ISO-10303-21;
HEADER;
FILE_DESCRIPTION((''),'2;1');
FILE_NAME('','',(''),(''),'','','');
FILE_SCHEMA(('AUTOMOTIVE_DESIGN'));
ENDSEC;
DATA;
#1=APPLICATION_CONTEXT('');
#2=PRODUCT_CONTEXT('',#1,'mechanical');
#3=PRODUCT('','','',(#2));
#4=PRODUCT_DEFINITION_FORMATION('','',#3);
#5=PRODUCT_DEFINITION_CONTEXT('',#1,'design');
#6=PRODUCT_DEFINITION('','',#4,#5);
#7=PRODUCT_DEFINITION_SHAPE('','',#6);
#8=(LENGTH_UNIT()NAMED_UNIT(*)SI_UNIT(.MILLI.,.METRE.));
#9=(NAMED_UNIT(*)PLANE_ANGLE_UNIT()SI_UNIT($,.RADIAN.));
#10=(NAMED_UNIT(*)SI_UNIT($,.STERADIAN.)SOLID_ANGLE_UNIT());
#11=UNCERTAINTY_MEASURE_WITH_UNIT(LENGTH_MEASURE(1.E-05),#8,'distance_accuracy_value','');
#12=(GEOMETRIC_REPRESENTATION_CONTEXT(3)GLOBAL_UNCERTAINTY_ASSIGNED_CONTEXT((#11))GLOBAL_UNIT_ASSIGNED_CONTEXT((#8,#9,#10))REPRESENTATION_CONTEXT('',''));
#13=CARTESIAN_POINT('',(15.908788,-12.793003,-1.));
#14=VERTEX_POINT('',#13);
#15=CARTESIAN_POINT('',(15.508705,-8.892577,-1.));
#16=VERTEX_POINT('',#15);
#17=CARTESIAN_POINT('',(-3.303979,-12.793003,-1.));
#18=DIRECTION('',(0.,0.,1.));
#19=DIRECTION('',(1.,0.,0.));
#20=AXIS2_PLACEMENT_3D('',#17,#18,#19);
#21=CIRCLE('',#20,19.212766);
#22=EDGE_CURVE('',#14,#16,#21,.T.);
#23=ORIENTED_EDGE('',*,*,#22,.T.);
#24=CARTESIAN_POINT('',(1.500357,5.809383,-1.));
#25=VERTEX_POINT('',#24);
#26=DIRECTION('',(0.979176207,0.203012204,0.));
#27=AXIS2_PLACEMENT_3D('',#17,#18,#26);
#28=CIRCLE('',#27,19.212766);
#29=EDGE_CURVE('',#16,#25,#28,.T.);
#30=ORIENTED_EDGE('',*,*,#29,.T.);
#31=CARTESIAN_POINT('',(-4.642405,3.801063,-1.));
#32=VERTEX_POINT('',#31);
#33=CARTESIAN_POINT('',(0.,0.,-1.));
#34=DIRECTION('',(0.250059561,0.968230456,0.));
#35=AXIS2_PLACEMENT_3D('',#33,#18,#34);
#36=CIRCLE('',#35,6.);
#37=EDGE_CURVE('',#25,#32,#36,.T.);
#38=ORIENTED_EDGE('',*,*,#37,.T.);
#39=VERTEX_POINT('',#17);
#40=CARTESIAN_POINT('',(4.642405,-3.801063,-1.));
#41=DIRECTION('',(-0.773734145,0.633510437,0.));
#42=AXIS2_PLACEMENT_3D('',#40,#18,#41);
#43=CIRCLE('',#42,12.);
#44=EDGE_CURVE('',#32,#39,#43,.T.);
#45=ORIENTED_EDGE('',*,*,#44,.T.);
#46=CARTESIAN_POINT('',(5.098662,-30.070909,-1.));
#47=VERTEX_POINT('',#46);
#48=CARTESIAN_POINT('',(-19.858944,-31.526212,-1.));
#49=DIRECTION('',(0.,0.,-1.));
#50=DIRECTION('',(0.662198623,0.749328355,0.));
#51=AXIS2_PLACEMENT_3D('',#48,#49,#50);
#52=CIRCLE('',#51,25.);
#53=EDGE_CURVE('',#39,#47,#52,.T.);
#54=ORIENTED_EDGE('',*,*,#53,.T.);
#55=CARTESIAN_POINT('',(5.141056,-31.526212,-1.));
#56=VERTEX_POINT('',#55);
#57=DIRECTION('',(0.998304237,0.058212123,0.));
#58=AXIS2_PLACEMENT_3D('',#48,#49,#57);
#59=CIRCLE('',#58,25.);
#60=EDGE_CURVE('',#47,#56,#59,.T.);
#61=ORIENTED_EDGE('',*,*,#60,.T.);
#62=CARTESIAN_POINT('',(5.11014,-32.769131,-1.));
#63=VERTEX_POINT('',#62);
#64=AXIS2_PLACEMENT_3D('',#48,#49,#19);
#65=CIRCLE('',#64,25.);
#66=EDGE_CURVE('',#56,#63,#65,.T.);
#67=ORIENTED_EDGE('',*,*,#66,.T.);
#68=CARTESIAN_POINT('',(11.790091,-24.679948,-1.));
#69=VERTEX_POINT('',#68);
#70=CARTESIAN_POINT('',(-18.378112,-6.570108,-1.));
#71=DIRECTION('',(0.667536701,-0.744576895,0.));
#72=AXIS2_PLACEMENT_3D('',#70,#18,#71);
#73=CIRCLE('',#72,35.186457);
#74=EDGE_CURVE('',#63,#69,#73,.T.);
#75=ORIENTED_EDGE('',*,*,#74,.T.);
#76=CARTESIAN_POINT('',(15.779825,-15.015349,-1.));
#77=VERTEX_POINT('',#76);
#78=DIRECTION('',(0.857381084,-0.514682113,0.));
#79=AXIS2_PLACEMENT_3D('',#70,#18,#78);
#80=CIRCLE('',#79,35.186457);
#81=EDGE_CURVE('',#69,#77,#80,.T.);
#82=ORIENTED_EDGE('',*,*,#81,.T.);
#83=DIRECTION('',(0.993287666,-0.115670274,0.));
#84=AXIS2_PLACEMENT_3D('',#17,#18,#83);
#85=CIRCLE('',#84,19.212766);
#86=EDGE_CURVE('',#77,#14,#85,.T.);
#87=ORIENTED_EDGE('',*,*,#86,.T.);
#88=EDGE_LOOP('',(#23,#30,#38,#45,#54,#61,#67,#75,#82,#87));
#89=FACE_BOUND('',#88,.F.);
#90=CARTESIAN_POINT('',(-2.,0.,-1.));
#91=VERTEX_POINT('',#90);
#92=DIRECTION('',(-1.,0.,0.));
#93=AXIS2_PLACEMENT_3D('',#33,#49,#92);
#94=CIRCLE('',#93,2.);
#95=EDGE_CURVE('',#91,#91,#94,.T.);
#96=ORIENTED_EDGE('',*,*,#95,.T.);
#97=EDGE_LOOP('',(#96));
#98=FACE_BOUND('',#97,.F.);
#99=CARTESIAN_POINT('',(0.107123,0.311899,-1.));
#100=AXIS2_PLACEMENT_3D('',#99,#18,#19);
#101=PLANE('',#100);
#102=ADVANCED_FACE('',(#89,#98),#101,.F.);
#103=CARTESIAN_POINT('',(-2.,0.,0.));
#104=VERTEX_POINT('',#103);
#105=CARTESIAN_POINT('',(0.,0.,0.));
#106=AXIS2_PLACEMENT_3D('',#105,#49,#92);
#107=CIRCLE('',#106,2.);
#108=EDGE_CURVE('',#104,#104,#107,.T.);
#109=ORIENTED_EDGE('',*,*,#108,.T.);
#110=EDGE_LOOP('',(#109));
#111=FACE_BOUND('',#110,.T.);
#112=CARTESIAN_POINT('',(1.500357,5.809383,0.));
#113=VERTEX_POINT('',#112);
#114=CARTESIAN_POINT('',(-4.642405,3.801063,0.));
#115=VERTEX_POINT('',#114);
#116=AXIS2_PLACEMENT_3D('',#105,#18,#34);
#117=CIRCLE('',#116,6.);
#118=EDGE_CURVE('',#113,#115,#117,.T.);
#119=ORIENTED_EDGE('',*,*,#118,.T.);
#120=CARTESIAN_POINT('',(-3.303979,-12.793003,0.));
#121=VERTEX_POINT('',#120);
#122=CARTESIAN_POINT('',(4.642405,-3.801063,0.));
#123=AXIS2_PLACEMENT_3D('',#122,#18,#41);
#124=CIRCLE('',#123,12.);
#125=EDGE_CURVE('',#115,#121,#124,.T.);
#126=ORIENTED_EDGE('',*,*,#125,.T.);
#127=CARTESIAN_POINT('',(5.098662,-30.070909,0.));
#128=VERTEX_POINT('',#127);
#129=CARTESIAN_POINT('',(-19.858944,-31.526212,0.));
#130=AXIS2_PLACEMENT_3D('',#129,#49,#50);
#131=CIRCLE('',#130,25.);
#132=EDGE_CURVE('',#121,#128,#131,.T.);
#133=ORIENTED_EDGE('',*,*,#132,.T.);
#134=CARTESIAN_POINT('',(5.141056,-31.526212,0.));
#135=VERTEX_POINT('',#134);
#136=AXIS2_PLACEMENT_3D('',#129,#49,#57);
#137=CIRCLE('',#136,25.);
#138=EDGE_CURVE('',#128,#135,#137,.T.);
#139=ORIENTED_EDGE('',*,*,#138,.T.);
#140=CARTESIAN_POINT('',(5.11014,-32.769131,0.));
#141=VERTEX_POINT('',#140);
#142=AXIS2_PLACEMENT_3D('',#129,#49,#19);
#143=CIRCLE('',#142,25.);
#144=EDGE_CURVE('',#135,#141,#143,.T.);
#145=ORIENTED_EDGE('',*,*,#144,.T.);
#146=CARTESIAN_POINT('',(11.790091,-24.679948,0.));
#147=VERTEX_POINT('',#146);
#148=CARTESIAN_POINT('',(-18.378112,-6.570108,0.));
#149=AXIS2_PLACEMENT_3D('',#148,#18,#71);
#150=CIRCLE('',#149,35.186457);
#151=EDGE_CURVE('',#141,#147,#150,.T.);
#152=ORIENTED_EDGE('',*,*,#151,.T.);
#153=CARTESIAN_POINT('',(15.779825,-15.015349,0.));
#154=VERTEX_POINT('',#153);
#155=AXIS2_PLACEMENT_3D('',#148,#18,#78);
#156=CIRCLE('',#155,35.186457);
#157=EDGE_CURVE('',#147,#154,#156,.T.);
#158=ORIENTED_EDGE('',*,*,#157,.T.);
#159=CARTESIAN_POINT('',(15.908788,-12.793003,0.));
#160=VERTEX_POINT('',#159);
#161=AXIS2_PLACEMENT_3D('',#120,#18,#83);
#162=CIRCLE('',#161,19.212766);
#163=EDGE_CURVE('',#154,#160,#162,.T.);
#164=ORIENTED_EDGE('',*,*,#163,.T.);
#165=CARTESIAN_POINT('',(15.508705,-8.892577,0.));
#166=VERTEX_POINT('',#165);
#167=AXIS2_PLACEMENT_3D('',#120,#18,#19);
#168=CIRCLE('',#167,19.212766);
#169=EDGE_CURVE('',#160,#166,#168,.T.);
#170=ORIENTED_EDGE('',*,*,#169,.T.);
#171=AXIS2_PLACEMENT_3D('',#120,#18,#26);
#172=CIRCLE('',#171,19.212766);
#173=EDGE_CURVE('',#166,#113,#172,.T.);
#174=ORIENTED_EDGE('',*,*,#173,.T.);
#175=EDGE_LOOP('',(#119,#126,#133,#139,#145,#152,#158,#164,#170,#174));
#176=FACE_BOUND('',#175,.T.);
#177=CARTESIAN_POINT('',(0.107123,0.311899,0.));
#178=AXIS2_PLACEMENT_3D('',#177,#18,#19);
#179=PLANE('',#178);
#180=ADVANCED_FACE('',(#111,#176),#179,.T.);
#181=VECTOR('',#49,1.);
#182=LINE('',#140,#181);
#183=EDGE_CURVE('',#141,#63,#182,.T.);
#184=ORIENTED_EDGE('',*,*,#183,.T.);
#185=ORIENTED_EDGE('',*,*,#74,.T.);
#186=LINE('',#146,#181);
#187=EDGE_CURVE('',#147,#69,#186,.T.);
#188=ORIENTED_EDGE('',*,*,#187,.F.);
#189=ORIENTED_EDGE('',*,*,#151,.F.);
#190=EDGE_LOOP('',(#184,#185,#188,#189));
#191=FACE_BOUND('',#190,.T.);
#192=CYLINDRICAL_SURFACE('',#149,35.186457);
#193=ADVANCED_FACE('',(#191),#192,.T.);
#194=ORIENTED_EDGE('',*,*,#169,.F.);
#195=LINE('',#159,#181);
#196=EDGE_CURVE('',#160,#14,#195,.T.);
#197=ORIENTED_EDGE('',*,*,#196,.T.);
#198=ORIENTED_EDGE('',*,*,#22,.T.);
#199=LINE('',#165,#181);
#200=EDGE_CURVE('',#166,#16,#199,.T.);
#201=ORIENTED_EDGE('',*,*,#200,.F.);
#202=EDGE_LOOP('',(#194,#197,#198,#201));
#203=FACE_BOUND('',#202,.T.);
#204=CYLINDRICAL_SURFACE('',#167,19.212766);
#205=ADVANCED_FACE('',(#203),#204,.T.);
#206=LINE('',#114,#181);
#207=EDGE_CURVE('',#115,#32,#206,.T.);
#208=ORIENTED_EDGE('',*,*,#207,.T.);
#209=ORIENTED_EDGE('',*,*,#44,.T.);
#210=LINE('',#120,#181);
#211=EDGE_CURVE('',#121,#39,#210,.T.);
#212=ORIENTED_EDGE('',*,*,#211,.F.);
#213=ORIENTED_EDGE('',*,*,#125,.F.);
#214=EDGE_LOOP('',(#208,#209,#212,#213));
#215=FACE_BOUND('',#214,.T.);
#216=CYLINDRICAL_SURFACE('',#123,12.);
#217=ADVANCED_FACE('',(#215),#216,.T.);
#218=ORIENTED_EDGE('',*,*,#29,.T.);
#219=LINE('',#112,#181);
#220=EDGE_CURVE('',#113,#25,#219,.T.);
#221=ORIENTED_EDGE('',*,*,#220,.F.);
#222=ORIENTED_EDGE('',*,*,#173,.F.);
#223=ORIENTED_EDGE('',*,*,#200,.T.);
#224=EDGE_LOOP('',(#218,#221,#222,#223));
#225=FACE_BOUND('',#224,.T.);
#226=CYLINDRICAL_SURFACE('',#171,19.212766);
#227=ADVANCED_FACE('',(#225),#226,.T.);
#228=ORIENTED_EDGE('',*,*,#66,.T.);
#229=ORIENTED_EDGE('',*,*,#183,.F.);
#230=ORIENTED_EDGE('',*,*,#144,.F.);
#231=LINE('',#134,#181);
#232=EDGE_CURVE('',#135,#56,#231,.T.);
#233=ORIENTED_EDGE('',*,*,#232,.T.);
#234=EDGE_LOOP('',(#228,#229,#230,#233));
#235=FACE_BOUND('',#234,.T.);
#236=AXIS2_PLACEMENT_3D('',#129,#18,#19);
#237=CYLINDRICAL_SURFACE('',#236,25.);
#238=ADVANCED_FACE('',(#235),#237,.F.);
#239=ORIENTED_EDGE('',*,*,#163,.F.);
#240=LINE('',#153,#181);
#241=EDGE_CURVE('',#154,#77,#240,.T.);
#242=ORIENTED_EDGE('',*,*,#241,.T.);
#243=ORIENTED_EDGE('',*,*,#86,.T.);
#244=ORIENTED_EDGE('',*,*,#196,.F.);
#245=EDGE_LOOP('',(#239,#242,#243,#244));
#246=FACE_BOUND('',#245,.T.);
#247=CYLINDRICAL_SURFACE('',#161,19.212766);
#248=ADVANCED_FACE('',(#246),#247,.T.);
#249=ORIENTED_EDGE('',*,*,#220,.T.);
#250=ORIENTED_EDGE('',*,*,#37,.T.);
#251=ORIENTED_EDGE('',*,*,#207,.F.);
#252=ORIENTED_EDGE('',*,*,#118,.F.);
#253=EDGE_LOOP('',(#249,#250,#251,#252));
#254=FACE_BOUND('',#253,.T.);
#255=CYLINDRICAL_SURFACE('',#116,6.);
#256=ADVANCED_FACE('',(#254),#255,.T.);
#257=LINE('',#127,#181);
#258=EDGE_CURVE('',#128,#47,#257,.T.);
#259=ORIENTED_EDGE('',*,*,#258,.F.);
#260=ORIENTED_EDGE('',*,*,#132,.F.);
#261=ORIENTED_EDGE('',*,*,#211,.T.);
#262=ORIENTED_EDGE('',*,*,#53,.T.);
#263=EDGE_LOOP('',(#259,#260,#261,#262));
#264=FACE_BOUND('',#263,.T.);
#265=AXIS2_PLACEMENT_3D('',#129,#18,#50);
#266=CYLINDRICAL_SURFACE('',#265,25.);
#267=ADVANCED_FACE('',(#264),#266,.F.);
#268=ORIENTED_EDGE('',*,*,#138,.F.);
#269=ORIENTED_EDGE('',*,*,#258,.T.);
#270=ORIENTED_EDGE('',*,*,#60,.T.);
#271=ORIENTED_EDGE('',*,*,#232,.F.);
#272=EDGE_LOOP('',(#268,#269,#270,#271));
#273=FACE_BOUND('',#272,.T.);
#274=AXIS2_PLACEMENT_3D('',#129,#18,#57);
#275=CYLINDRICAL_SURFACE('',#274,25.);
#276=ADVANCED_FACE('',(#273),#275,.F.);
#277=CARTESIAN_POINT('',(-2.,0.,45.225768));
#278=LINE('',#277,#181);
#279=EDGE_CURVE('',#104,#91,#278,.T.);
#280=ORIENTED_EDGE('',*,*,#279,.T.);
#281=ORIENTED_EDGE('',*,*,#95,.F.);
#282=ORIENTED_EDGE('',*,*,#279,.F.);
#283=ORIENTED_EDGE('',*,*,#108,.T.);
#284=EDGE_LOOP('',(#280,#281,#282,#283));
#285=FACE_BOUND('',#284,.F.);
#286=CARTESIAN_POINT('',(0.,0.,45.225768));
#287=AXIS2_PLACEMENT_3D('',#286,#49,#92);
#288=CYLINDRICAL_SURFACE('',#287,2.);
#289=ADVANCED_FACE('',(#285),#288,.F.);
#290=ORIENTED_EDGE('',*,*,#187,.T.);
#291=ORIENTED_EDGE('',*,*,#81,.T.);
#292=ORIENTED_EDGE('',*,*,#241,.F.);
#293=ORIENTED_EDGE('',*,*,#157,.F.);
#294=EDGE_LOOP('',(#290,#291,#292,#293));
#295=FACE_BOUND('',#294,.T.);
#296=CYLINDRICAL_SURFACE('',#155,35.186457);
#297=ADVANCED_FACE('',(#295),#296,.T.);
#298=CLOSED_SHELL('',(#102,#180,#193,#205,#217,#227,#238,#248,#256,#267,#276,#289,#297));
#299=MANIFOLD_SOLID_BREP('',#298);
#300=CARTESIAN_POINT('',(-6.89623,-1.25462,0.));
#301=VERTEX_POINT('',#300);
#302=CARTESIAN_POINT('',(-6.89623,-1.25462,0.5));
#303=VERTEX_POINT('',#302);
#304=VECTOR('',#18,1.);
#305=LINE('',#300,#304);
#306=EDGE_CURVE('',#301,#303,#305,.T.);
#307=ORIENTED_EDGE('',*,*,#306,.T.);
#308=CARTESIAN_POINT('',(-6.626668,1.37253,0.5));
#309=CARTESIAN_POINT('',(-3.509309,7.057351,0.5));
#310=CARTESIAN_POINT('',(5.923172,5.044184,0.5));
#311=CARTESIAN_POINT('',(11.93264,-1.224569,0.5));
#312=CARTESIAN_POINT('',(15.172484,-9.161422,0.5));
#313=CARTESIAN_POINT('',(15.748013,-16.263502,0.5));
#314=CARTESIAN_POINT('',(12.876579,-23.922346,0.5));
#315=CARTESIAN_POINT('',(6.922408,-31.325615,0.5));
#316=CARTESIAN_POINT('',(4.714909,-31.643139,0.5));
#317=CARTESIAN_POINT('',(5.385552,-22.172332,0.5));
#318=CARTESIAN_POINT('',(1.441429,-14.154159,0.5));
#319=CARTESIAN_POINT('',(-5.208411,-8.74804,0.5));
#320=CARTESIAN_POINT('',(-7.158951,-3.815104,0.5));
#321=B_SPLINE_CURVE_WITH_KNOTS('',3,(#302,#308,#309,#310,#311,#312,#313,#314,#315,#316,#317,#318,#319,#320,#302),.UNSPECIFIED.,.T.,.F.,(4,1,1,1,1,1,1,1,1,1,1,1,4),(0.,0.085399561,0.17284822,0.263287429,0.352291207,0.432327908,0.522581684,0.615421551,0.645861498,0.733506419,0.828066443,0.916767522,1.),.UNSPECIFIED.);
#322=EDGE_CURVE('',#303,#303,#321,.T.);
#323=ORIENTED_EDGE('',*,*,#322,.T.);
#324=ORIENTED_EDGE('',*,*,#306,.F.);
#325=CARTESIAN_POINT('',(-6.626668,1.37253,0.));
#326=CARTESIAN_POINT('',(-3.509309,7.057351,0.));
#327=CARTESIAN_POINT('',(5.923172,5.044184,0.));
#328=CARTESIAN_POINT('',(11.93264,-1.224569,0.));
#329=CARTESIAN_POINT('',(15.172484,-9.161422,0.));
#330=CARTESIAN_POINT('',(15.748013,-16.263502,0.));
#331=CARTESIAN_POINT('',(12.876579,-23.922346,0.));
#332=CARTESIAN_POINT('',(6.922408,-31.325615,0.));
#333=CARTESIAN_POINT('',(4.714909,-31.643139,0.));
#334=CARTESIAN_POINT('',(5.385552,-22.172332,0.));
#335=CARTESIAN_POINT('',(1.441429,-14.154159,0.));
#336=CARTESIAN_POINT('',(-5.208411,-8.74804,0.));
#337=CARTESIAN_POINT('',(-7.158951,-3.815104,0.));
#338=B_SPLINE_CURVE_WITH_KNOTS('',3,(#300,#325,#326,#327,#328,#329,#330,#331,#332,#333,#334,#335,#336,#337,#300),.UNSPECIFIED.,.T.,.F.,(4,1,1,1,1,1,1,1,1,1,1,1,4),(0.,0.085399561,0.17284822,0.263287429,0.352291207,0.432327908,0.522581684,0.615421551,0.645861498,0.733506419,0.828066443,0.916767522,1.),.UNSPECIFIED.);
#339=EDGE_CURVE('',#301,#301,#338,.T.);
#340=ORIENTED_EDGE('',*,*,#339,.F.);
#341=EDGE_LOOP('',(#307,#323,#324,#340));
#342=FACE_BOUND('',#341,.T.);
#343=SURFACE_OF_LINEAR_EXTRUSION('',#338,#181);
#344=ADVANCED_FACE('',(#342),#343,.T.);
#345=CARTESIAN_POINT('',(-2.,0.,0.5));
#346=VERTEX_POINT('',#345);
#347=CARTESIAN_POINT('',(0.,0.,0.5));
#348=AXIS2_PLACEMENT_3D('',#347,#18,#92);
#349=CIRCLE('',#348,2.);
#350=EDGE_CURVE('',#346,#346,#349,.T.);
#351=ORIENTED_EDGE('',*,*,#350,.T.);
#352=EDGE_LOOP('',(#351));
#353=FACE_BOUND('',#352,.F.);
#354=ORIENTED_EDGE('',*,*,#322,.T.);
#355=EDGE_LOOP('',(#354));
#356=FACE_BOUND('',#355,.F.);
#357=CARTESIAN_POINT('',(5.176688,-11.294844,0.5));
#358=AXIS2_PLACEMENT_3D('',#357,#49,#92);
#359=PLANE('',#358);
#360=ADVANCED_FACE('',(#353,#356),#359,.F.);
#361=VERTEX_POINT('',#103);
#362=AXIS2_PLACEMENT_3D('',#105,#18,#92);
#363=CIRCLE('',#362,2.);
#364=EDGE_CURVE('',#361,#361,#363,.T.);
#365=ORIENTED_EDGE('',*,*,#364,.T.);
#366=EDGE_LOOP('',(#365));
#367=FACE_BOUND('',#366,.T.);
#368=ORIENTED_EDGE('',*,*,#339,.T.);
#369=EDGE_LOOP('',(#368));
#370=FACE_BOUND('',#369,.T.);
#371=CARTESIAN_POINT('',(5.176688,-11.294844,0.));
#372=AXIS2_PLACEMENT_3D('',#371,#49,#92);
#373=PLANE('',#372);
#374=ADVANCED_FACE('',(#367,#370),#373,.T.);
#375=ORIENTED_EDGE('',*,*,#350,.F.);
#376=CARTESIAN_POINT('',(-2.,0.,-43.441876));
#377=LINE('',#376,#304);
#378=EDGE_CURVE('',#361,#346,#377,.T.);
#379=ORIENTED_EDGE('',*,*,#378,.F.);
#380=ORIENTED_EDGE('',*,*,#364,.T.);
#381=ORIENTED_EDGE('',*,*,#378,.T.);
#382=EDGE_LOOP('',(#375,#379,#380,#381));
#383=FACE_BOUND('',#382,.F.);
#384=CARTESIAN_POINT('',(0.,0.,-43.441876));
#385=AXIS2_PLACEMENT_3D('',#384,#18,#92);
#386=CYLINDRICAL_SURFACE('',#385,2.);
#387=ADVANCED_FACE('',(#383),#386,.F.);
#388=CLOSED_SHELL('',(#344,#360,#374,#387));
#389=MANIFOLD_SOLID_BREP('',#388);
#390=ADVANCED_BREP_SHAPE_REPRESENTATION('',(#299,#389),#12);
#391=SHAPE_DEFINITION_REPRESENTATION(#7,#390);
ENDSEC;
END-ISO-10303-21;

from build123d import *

# Parameters (mm, degrees)
F1_DEPTH = 1
F2_D     = 4
F4_DEPTH = 0.5
F5_D     = 4


# Not quite as in the source:
# - a feature names something its author has since deleted; it is built from what else it names


with BuildPart() as f1:
    # F0 (on Top) → F1 (new body)
    with BuildSketch(Plane.XY):
        with BuildLine():
            ThreePointArc((-4.6424048681, 3.80106262), (-2.0181143168, -5.6504172062), (6, 0))
            ThreePointArc((6, 0), (4.7435294982, 3.6740887169), (1.5003573667, 5.8093827359))
            ThreePointArc((1.5003573667, 5.8093827359), (-1.8645248851, 5.7029419559), (-4.6424048681, 3.80106262))
        make_face()
        with BuildLine():
            ThreePointArc((1.5003573667, 5.8093827359), (4.7435294982, 3.6740887169), (6, 0))
            ThreePointArc((6, 0), (-2.0181143168, -5.6504172062), (-4.6424048681, 3.80106262))
            ThreePointArc((-4.6424048681, 3.80106262), (-7.318751316, -4.7658127053), (-3.303978556, -12.7930029256))
            ThreePointArc((-3.303978556, -12.7930029256), (7.078551337, -15.5511771033), (15.5087052047, -8.8925768346))
            ThreePointArc((15.5087052047, -8.8925768346), (10.6056515013, 0.4603961331), (1.5003573667, 5.8093827359))
        make_face()
        with BuildLine():
            ThreePointArc((15.9087878687, -12.7930028931), (15.8085054873, -10.83255718), (15.5087052047, -8.8925768346))
            ThreePointArc((15.5087052047, -8.8925768346), (7.078551337, -15.5511771033), (-3.303978556, -12.7930029256))
            ThreePointArc((-3.303978556, -12.7930029256), (2.6233801475, -20.5925438503), (5.0986617771, -30.0709087245))
            ThreePointArc((5.0986617771, -30.0709087245), (8.7496291756, -27.7543175035), (11.7900910284, -24.6799477224))
            ThreePointArc((11.7900910284, -24.6799477224), (14.1459437512, -19.9966701457), (15.7798253656, -15.015348857))
            ThreePointArc((15.7798253656, -15.015348857), (15.8765201462, -13.9060452228), (15.9087878687, -12.7930028931))
        make_face()
        with BuildLine():
            ThreePointArc((11.7900910284, -24.6799477224), (8.7496291756, -27.7543175035), (5.0986617771, -30.0709087245))
            ThreePointArc((5.0986617771, -30.0709087245), (5.130455094, -30.7982515831), (5.1410558629, -31.5262117967))
            ThreePointArc((5.1410558629, -31.5262117967), (5.1333256528, -32.1478634275), (5.1101398029, -32.7691306185))
            ThreePointArc((5.1101398029, -32.7691306185), (8.7532813741, -28.9748900207), (11.7900910284, -24.6799477224))
        make_face()
    extrude(amount=-F1_DEPTH)

    # F2 (through all)
    with Locations(Plane.XY):
        with Locations((0, 0)):
            Hole(F2_D / 2)


with BuildPart() as f4:
    # F3 (on Top) → F4 (new body)
    with BuildSketch(Plane.XY):
        with BuildLine():
            add(Edge.make_bspline(
                [(-6.8962299265, -1.2546199141), (-6.626668451, 1.3725303486), (-3.5093090382, 7.0573512811), (5.9231715051, 5.0441838522), (11.9326397328, -1.2245690506), (15.1724840247, -9.1614223638), (15.7480132614, -16.2635016888), (12.8765786983, -23.9223462621), (6.9224077381, -31.3256150747), (4.7149088903, -31.6431390236), (5.3855520707, -22.1723322109), (1.4414285593, -14.15415947), (-5.2084107106, -8.7480398369), (-7.1589510611, -3.8151041102), (-6.8962299265, -1.2546199141)],
                knots=[0, 0, 0, 0, 0.0853995614, 0.1728482202, 0.263287429, 0.3522912072, 0.4323279076, 0.5225816841, 0.615421551, 0.6458614985, 0.7335064187, 0.8280664425, 0.9167675217, 1, 1, 1, 1], degree=3))
        make_face()
    extrude(amount=F4_DEPTH)

    # F5 (through all)
    with Locations(Plane(origin=(0, 0, 0), x_dir=(1, 0, 0), z_dir=(0, 0, -1))):
        with Locations((0, 0)):
            Hole(F5_D / 2)


solid = Compound([f1.part, f4.part])
